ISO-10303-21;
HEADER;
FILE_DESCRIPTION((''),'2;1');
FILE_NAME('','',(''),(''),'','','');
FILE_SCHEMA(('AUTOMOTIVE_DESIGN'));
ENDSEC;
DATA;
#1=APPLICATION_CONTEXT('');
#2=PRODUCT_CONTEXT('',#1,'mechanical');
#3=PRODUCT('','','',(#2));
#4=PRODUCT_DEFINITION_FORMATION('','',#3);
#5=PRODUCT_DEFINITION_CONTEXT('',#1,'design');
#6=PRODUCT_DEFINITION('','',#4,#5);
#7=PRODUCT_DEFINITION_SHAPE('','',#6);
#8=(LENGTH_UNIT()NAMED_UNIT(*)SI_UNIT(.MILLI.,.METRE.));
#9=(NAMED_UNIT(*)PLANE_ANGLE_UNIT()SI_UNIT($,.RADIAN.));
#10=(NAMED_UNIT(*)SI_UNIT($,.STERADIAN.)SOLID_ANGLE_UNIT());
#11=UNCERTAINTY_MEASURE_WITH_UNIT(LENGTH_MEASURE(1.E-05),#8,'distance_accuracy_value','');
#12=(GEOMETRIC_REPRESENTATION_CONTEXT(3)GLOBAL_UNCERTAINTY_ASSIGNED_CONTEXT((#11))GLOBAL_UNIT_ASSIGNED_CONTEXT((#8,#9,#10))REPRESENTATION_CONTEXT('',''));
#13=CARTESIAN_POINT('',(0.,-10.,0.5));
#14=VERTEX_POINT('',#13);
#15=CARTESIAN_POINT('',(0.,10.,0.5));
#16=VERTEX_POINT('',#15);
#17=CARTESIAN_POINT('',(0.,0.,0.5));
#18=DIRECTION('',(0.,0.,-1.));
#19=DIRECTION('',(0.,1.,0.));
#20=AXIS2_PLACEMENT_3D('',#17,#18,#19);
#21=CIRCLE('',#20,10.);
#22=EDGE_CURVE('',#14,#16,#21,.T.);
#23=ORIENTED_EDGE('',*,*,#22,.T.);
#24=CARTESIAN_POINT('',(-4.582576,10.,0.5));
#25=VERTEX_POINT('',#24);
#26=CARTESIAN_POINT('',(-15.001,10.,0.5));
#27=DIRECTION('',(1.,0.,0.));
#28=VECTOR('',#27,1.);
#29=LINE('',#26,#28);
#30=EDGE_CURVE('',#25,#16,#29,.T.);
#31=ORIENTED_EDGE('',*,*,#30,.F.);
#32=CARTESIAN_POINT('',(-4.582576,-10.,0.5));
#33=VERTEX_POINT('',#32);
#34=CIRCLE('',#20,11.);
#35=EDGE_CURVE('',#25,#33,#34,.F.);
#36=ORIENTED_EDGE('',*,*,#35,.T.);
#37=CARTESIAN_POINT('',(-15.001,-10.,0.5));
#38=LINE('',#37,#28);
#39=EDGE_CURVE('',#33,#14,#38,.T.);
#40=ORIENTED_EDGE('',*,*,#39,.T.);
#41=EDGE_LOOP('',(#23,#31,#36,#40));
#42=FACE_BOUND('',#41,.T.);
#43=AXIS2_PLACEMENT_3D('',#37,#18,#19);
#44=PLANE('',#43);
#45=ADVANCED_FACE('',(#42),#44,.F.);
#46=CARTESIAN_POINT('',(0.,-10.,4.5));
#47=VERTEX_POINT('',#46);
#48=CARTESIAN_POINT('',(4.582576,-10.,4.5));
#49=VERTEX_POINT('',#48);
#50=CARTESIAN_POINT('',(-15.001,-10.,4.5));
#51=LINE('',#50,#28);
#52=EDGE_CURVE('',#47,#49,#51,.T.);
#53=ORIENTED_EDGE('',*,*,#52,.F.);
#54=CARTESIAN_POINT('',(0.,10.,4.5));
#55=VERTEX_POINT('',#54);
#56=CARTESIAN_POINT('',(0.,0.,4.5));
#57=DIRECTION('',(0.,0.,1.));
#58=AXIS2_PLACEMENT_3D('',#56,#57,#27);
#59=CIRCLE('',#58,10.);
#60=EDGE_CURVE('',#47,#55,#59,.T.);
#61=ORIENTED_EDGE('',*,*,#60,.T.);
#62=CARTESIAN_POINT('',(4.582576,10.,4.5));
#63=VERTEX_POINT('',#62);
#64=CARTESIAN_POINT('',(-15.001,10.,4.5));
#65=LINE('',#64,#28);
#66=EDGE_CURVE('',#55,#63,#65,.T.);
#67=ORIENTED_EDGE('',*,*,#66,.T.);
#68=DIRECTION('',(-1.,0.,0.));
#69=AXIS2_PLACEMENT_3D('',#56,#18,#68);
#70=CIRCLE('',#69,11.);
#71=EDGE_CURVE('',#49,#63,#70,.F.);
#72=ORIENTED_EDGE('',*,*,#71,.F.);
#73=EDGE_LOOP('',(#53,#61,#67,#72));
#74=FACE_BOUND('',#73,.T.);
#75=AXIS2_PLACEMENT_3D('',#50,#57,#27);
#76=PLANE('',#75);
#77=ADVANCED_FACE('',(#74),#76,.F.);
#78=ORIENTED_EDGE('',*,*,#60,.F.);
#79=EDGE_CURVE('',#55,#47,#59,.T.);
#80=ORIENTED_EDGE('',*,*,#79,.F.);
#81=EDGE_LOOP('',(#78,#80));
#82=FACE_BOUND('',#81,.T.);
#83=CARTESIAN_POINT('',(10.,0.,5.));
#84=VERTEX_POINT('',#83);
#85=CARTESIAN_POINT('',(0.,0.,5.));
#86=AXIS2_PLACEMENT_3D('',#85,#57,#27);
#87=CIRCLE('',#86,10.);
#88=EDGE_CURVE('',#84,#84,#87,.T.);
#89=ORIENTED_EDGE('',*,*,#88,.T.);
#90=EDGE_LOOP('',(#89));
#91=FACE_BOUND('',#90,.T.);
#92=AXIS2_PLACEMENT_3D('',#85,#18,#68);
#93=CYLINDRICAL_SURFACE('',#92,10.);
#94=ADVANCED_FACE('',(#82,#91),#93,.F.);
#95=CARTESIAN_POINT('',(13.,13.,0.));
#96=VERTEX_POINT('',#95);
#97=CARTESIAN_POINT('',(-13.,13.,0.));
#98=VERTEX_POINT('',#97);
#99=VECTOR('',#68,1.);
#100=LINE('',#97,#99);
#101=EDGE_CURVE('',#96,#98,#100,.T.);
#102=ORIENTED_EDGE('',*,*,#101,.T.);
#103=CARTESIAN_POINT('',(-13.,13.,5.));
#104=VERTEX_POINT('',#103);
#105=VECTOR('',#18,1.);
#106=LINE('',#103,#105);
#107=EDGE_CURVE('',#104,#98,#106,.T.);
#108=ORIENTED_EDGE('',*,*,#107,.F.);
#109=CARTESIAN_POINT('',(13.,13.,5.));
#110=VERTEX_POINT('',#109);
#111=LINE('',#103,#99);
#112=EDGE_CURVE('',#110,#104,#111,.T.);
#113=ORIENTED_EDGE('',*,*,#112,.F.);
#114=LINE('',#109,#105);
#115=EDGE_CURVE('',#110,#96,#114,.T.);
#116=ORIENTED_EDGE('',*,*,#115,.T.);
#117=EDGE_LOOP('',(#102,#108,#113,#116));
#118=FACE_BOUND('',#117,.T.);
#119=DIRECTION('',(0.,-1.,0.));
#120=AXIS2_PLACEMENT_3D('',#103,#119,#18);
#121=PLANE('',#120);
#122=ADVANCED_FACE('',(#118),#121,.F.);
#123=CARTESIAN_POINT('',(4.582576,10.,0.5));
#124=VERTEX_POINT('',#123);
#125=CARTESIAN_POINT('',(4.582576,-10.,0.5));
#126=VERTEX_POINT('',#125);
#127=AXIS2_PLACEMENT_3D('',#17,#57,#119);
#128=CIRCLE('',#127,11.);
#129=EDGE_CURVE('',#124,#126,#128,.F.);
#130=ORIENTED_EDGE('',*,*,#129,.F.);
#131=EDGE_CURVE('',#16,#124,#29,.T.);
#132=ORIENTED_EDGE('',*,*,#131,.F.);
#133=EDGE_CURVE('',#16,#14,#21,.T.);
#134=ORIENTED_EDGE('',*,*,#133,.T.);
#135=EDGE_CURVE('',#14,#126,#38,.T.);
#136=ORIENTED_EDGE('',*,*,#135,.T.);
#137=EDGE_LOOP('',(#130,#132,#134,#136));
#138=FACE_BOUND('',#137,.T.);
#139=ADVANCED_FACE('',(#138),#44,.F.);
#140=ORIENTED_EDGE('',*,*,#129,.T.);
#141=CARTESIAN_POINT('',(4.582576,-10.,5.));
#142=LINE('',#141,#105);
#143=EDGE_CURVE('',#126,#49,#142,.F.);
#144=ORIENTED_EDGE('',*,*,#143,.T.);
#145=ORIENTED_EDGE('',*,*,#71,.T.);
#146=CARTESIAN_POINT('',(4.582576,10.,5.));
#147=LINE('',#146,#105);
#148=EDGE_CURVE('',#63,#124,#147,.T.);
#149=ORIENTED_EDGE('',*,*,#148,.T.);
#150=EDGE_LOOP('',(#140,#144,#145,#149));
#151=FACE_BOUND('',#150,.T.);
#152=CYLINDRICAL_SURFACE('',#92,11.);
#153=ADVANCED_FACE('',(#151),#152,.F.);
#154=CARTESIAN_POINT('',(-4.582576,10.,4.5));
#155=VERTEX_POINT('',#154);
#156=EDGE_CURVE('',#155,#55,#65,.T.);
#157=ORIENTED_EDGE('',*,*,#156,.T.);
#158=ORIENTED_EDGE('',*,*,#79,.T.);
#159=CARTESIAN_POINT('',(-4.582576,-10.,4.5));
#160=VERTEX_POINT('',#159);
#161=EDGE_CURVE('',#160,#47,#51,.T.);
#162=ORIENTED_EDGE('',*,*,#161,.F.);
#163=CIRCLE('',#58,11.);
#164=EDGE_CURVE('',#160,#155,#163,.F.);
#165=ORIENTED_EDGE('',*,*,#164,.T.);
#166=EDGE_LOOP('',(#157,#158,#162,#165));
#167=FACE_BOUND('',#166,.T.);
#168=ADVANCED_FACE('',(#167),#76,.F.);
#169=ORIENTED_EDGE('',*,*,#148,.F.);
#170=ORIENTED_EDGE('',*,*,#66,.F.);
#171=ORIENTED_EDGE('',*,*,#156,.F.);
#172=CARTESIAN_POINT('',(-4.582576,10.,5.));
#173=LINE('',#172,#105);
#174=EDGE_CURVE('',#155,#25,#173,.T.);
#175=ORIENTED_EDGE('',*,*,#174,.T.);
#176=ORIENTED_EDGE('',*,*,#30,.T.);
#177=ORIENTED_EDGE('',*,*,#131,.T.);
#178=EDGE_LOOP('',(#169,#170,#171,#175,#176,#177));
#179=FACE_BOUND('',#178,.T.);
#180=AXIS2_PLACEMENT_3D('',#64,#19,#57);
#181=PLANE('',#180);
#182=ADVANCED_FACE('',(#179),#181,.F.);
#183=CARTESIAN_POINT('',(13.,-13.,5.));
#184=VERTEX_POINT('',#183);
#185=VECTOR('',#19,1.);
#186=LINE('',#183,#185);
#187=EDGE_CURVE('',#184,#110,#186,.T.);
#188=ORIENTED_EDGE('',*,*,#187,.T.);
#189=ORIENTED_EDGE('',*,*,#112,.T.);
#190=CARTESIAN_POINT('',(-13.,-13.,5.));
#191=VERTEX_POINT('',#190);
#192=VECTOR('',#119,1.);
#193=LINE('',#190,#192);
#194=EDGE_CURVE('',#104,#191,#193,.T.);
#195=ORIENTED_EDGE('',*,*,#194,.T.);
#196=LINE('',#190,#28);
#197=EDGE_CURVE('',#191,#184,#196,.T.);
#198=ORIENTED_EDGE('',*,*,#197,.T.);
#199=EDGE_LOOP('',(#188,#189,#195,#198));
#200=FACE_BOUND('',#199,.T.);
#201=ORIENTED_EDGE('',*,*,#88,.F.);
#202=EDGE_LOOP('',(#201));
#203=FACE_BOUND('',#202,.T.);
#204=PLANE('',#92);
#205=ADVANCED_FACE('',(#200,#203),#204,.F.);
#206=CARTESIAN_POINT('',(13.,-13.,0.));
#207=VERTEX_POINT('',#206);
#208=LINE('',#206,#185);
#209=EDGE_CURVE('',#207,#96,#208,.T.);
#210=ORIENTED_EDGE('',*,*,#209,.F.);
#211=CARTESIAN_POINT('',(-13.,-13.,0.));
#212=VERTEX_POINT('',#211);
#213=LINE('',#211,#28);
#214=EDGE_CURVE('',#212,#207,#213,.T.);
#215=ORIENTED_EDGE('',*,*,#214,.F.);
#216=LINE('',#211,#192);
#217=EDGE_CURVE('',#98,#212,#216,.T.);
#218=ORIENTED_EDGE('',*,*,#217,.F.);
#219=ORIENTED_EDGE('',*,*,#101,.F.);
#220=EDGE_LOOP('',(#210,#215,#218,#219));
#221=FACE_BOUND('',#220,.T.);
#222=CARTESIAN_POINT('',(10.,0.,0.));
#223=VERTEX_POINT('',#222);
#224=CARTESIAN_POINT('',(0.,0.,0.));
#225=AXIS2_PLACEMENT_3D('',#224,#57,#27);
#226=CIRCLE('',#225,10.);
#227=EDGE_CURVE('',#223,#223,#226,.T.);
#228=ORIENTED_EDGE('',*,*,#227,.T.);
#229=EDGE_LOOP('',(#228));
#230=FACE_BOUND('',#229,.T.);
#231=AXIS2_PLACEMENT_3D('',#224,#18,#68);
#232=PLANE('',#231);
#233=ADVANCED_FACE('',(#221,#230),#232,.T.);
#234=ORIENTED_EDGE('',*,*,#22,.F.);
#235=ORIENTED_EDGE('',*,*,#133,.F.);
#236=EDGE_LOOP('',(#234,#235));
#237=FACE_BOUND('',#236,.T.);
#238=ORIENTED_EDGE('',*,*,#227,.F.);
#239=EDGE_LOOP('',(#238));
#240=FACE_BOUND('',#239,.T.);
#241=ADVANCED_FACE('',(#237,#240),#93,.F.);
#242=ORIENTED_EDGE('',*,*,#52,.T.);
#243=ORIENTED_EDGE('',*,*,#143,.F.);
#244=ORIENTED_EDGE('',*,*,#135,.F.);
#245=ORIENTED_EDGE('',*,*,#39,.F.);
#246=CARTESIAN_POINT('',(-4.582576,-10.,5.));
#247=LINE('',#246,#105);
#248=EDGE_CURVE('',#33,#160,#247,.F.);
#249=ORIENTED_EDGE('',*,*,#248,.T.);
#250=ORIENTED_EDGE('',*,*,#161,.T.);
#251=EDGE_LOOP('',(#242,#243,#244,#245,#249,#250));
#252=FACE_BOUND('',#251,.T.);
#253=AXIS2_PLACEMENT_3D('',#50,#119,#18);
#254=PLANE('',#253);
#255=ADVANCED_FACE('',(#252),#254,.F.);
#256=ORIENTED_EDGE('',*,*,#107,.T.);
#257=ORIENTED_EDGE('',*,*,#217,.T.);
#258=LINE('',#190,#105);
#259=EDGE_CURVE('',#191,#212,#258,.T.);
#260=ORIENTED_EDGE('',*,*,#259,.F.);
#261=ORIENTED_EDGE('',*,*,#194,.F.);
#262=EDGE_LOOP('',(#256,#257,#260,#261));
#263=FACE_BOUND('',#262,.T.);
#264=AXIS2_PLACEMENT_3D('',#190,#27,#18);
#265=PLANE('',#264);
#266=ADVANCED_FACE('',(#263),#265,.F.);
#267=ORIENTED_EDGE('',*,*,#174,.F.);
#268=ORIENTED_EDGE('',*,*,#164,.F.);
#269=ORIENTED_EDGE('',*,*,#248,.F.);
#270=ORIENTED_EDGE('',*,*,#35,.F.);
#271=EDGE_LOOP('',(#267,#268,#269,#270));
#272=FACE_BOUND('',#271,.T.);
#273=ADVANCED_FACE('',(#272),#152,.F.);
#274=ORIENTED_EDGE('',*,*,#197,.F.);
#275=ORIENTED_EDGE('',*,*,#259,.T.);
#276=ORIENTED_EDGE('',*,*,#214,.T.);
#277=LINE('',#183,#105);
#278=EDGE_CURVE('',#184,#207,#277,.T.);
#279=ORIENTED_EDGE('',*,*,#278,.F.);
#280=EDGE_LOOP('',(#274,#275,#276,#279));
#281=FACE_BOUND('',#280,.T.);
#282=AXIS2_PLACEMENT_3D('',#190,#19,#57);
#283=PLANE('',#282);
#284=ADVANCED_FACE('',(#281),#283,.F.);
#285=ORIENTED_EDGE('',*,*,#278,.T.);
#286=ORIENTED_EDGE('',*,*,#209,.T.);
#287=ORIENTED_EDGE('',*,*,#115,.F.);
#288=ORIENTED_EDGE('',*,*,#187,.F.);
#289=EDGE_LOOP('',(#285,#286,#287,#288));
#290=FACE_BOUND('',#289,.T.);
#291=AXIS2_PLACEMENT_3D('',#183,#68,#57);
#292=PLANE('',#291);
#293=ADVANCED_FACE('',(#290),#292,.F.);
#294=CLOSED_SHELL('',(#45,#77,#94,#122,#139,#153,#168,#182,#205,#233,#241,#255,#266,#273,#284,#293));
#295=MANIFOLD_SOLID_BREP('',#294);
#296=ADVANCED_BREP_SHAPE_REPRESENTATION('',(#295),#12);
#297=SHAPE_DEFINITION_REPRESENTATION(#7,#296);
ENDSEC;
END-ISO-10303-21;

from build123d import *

# Parameters (mm, degrees)
SKETCH_1_W          = 26
SKETCH_1_H          = 26
SKETCH_1_R          = 10
EXTRUDE_1_DEPTH     = 5
CUT_EXTRUDE_START   = 0.5
CUT_EXTRUDE_3_DEPTH = 4


# Read off the part's stored shape, not the designer's step: 切除-拉伸3
with BuildPart() as part:
    # 草图1 → 凸台-拉伸1 (new body)
    with BuildSketch(Plane.XY):
        Rectangle(SKETCH_1_W, SKETCH_1_H)
        Circle(SKETCH_1_R, mode=Mode.SUBTRACT)
    extrude(amount=EXTRUDE_1_DEPTH)

    # 切除-拉伸3 outline → 切除-拉伸3 (cut)
    with BuildSketch(Plane.XY.offset(CUT_EXTRUDE_START)):
        with BuildLine():
            ThreePointArc((4.582575695, -10), (11, 0), (4.582575695, 10))
            Line((4.582575695, 10), (0, 10))
            ThreePointArc((0, 10), (10, 0), (0, -10))
            Line((0, -10), (4.582575695, -10))
        make_face()
        with BuildLine():
            ThreePointArc((0, -10), (-10, 0), (0, 10))
            Line((0, 10), (-4.582575695, 10))
            ThreePointArc((-4.582575695, 10), (-11, 0), (-4.582575695, -10))
            Line((-4.582575695, -10), (0, -10))
        make_face()
    extrude(amount=CUT_EXTRUDE_3_DEPTH, mode=Mode.SUBTRACT)


solid = part.part
